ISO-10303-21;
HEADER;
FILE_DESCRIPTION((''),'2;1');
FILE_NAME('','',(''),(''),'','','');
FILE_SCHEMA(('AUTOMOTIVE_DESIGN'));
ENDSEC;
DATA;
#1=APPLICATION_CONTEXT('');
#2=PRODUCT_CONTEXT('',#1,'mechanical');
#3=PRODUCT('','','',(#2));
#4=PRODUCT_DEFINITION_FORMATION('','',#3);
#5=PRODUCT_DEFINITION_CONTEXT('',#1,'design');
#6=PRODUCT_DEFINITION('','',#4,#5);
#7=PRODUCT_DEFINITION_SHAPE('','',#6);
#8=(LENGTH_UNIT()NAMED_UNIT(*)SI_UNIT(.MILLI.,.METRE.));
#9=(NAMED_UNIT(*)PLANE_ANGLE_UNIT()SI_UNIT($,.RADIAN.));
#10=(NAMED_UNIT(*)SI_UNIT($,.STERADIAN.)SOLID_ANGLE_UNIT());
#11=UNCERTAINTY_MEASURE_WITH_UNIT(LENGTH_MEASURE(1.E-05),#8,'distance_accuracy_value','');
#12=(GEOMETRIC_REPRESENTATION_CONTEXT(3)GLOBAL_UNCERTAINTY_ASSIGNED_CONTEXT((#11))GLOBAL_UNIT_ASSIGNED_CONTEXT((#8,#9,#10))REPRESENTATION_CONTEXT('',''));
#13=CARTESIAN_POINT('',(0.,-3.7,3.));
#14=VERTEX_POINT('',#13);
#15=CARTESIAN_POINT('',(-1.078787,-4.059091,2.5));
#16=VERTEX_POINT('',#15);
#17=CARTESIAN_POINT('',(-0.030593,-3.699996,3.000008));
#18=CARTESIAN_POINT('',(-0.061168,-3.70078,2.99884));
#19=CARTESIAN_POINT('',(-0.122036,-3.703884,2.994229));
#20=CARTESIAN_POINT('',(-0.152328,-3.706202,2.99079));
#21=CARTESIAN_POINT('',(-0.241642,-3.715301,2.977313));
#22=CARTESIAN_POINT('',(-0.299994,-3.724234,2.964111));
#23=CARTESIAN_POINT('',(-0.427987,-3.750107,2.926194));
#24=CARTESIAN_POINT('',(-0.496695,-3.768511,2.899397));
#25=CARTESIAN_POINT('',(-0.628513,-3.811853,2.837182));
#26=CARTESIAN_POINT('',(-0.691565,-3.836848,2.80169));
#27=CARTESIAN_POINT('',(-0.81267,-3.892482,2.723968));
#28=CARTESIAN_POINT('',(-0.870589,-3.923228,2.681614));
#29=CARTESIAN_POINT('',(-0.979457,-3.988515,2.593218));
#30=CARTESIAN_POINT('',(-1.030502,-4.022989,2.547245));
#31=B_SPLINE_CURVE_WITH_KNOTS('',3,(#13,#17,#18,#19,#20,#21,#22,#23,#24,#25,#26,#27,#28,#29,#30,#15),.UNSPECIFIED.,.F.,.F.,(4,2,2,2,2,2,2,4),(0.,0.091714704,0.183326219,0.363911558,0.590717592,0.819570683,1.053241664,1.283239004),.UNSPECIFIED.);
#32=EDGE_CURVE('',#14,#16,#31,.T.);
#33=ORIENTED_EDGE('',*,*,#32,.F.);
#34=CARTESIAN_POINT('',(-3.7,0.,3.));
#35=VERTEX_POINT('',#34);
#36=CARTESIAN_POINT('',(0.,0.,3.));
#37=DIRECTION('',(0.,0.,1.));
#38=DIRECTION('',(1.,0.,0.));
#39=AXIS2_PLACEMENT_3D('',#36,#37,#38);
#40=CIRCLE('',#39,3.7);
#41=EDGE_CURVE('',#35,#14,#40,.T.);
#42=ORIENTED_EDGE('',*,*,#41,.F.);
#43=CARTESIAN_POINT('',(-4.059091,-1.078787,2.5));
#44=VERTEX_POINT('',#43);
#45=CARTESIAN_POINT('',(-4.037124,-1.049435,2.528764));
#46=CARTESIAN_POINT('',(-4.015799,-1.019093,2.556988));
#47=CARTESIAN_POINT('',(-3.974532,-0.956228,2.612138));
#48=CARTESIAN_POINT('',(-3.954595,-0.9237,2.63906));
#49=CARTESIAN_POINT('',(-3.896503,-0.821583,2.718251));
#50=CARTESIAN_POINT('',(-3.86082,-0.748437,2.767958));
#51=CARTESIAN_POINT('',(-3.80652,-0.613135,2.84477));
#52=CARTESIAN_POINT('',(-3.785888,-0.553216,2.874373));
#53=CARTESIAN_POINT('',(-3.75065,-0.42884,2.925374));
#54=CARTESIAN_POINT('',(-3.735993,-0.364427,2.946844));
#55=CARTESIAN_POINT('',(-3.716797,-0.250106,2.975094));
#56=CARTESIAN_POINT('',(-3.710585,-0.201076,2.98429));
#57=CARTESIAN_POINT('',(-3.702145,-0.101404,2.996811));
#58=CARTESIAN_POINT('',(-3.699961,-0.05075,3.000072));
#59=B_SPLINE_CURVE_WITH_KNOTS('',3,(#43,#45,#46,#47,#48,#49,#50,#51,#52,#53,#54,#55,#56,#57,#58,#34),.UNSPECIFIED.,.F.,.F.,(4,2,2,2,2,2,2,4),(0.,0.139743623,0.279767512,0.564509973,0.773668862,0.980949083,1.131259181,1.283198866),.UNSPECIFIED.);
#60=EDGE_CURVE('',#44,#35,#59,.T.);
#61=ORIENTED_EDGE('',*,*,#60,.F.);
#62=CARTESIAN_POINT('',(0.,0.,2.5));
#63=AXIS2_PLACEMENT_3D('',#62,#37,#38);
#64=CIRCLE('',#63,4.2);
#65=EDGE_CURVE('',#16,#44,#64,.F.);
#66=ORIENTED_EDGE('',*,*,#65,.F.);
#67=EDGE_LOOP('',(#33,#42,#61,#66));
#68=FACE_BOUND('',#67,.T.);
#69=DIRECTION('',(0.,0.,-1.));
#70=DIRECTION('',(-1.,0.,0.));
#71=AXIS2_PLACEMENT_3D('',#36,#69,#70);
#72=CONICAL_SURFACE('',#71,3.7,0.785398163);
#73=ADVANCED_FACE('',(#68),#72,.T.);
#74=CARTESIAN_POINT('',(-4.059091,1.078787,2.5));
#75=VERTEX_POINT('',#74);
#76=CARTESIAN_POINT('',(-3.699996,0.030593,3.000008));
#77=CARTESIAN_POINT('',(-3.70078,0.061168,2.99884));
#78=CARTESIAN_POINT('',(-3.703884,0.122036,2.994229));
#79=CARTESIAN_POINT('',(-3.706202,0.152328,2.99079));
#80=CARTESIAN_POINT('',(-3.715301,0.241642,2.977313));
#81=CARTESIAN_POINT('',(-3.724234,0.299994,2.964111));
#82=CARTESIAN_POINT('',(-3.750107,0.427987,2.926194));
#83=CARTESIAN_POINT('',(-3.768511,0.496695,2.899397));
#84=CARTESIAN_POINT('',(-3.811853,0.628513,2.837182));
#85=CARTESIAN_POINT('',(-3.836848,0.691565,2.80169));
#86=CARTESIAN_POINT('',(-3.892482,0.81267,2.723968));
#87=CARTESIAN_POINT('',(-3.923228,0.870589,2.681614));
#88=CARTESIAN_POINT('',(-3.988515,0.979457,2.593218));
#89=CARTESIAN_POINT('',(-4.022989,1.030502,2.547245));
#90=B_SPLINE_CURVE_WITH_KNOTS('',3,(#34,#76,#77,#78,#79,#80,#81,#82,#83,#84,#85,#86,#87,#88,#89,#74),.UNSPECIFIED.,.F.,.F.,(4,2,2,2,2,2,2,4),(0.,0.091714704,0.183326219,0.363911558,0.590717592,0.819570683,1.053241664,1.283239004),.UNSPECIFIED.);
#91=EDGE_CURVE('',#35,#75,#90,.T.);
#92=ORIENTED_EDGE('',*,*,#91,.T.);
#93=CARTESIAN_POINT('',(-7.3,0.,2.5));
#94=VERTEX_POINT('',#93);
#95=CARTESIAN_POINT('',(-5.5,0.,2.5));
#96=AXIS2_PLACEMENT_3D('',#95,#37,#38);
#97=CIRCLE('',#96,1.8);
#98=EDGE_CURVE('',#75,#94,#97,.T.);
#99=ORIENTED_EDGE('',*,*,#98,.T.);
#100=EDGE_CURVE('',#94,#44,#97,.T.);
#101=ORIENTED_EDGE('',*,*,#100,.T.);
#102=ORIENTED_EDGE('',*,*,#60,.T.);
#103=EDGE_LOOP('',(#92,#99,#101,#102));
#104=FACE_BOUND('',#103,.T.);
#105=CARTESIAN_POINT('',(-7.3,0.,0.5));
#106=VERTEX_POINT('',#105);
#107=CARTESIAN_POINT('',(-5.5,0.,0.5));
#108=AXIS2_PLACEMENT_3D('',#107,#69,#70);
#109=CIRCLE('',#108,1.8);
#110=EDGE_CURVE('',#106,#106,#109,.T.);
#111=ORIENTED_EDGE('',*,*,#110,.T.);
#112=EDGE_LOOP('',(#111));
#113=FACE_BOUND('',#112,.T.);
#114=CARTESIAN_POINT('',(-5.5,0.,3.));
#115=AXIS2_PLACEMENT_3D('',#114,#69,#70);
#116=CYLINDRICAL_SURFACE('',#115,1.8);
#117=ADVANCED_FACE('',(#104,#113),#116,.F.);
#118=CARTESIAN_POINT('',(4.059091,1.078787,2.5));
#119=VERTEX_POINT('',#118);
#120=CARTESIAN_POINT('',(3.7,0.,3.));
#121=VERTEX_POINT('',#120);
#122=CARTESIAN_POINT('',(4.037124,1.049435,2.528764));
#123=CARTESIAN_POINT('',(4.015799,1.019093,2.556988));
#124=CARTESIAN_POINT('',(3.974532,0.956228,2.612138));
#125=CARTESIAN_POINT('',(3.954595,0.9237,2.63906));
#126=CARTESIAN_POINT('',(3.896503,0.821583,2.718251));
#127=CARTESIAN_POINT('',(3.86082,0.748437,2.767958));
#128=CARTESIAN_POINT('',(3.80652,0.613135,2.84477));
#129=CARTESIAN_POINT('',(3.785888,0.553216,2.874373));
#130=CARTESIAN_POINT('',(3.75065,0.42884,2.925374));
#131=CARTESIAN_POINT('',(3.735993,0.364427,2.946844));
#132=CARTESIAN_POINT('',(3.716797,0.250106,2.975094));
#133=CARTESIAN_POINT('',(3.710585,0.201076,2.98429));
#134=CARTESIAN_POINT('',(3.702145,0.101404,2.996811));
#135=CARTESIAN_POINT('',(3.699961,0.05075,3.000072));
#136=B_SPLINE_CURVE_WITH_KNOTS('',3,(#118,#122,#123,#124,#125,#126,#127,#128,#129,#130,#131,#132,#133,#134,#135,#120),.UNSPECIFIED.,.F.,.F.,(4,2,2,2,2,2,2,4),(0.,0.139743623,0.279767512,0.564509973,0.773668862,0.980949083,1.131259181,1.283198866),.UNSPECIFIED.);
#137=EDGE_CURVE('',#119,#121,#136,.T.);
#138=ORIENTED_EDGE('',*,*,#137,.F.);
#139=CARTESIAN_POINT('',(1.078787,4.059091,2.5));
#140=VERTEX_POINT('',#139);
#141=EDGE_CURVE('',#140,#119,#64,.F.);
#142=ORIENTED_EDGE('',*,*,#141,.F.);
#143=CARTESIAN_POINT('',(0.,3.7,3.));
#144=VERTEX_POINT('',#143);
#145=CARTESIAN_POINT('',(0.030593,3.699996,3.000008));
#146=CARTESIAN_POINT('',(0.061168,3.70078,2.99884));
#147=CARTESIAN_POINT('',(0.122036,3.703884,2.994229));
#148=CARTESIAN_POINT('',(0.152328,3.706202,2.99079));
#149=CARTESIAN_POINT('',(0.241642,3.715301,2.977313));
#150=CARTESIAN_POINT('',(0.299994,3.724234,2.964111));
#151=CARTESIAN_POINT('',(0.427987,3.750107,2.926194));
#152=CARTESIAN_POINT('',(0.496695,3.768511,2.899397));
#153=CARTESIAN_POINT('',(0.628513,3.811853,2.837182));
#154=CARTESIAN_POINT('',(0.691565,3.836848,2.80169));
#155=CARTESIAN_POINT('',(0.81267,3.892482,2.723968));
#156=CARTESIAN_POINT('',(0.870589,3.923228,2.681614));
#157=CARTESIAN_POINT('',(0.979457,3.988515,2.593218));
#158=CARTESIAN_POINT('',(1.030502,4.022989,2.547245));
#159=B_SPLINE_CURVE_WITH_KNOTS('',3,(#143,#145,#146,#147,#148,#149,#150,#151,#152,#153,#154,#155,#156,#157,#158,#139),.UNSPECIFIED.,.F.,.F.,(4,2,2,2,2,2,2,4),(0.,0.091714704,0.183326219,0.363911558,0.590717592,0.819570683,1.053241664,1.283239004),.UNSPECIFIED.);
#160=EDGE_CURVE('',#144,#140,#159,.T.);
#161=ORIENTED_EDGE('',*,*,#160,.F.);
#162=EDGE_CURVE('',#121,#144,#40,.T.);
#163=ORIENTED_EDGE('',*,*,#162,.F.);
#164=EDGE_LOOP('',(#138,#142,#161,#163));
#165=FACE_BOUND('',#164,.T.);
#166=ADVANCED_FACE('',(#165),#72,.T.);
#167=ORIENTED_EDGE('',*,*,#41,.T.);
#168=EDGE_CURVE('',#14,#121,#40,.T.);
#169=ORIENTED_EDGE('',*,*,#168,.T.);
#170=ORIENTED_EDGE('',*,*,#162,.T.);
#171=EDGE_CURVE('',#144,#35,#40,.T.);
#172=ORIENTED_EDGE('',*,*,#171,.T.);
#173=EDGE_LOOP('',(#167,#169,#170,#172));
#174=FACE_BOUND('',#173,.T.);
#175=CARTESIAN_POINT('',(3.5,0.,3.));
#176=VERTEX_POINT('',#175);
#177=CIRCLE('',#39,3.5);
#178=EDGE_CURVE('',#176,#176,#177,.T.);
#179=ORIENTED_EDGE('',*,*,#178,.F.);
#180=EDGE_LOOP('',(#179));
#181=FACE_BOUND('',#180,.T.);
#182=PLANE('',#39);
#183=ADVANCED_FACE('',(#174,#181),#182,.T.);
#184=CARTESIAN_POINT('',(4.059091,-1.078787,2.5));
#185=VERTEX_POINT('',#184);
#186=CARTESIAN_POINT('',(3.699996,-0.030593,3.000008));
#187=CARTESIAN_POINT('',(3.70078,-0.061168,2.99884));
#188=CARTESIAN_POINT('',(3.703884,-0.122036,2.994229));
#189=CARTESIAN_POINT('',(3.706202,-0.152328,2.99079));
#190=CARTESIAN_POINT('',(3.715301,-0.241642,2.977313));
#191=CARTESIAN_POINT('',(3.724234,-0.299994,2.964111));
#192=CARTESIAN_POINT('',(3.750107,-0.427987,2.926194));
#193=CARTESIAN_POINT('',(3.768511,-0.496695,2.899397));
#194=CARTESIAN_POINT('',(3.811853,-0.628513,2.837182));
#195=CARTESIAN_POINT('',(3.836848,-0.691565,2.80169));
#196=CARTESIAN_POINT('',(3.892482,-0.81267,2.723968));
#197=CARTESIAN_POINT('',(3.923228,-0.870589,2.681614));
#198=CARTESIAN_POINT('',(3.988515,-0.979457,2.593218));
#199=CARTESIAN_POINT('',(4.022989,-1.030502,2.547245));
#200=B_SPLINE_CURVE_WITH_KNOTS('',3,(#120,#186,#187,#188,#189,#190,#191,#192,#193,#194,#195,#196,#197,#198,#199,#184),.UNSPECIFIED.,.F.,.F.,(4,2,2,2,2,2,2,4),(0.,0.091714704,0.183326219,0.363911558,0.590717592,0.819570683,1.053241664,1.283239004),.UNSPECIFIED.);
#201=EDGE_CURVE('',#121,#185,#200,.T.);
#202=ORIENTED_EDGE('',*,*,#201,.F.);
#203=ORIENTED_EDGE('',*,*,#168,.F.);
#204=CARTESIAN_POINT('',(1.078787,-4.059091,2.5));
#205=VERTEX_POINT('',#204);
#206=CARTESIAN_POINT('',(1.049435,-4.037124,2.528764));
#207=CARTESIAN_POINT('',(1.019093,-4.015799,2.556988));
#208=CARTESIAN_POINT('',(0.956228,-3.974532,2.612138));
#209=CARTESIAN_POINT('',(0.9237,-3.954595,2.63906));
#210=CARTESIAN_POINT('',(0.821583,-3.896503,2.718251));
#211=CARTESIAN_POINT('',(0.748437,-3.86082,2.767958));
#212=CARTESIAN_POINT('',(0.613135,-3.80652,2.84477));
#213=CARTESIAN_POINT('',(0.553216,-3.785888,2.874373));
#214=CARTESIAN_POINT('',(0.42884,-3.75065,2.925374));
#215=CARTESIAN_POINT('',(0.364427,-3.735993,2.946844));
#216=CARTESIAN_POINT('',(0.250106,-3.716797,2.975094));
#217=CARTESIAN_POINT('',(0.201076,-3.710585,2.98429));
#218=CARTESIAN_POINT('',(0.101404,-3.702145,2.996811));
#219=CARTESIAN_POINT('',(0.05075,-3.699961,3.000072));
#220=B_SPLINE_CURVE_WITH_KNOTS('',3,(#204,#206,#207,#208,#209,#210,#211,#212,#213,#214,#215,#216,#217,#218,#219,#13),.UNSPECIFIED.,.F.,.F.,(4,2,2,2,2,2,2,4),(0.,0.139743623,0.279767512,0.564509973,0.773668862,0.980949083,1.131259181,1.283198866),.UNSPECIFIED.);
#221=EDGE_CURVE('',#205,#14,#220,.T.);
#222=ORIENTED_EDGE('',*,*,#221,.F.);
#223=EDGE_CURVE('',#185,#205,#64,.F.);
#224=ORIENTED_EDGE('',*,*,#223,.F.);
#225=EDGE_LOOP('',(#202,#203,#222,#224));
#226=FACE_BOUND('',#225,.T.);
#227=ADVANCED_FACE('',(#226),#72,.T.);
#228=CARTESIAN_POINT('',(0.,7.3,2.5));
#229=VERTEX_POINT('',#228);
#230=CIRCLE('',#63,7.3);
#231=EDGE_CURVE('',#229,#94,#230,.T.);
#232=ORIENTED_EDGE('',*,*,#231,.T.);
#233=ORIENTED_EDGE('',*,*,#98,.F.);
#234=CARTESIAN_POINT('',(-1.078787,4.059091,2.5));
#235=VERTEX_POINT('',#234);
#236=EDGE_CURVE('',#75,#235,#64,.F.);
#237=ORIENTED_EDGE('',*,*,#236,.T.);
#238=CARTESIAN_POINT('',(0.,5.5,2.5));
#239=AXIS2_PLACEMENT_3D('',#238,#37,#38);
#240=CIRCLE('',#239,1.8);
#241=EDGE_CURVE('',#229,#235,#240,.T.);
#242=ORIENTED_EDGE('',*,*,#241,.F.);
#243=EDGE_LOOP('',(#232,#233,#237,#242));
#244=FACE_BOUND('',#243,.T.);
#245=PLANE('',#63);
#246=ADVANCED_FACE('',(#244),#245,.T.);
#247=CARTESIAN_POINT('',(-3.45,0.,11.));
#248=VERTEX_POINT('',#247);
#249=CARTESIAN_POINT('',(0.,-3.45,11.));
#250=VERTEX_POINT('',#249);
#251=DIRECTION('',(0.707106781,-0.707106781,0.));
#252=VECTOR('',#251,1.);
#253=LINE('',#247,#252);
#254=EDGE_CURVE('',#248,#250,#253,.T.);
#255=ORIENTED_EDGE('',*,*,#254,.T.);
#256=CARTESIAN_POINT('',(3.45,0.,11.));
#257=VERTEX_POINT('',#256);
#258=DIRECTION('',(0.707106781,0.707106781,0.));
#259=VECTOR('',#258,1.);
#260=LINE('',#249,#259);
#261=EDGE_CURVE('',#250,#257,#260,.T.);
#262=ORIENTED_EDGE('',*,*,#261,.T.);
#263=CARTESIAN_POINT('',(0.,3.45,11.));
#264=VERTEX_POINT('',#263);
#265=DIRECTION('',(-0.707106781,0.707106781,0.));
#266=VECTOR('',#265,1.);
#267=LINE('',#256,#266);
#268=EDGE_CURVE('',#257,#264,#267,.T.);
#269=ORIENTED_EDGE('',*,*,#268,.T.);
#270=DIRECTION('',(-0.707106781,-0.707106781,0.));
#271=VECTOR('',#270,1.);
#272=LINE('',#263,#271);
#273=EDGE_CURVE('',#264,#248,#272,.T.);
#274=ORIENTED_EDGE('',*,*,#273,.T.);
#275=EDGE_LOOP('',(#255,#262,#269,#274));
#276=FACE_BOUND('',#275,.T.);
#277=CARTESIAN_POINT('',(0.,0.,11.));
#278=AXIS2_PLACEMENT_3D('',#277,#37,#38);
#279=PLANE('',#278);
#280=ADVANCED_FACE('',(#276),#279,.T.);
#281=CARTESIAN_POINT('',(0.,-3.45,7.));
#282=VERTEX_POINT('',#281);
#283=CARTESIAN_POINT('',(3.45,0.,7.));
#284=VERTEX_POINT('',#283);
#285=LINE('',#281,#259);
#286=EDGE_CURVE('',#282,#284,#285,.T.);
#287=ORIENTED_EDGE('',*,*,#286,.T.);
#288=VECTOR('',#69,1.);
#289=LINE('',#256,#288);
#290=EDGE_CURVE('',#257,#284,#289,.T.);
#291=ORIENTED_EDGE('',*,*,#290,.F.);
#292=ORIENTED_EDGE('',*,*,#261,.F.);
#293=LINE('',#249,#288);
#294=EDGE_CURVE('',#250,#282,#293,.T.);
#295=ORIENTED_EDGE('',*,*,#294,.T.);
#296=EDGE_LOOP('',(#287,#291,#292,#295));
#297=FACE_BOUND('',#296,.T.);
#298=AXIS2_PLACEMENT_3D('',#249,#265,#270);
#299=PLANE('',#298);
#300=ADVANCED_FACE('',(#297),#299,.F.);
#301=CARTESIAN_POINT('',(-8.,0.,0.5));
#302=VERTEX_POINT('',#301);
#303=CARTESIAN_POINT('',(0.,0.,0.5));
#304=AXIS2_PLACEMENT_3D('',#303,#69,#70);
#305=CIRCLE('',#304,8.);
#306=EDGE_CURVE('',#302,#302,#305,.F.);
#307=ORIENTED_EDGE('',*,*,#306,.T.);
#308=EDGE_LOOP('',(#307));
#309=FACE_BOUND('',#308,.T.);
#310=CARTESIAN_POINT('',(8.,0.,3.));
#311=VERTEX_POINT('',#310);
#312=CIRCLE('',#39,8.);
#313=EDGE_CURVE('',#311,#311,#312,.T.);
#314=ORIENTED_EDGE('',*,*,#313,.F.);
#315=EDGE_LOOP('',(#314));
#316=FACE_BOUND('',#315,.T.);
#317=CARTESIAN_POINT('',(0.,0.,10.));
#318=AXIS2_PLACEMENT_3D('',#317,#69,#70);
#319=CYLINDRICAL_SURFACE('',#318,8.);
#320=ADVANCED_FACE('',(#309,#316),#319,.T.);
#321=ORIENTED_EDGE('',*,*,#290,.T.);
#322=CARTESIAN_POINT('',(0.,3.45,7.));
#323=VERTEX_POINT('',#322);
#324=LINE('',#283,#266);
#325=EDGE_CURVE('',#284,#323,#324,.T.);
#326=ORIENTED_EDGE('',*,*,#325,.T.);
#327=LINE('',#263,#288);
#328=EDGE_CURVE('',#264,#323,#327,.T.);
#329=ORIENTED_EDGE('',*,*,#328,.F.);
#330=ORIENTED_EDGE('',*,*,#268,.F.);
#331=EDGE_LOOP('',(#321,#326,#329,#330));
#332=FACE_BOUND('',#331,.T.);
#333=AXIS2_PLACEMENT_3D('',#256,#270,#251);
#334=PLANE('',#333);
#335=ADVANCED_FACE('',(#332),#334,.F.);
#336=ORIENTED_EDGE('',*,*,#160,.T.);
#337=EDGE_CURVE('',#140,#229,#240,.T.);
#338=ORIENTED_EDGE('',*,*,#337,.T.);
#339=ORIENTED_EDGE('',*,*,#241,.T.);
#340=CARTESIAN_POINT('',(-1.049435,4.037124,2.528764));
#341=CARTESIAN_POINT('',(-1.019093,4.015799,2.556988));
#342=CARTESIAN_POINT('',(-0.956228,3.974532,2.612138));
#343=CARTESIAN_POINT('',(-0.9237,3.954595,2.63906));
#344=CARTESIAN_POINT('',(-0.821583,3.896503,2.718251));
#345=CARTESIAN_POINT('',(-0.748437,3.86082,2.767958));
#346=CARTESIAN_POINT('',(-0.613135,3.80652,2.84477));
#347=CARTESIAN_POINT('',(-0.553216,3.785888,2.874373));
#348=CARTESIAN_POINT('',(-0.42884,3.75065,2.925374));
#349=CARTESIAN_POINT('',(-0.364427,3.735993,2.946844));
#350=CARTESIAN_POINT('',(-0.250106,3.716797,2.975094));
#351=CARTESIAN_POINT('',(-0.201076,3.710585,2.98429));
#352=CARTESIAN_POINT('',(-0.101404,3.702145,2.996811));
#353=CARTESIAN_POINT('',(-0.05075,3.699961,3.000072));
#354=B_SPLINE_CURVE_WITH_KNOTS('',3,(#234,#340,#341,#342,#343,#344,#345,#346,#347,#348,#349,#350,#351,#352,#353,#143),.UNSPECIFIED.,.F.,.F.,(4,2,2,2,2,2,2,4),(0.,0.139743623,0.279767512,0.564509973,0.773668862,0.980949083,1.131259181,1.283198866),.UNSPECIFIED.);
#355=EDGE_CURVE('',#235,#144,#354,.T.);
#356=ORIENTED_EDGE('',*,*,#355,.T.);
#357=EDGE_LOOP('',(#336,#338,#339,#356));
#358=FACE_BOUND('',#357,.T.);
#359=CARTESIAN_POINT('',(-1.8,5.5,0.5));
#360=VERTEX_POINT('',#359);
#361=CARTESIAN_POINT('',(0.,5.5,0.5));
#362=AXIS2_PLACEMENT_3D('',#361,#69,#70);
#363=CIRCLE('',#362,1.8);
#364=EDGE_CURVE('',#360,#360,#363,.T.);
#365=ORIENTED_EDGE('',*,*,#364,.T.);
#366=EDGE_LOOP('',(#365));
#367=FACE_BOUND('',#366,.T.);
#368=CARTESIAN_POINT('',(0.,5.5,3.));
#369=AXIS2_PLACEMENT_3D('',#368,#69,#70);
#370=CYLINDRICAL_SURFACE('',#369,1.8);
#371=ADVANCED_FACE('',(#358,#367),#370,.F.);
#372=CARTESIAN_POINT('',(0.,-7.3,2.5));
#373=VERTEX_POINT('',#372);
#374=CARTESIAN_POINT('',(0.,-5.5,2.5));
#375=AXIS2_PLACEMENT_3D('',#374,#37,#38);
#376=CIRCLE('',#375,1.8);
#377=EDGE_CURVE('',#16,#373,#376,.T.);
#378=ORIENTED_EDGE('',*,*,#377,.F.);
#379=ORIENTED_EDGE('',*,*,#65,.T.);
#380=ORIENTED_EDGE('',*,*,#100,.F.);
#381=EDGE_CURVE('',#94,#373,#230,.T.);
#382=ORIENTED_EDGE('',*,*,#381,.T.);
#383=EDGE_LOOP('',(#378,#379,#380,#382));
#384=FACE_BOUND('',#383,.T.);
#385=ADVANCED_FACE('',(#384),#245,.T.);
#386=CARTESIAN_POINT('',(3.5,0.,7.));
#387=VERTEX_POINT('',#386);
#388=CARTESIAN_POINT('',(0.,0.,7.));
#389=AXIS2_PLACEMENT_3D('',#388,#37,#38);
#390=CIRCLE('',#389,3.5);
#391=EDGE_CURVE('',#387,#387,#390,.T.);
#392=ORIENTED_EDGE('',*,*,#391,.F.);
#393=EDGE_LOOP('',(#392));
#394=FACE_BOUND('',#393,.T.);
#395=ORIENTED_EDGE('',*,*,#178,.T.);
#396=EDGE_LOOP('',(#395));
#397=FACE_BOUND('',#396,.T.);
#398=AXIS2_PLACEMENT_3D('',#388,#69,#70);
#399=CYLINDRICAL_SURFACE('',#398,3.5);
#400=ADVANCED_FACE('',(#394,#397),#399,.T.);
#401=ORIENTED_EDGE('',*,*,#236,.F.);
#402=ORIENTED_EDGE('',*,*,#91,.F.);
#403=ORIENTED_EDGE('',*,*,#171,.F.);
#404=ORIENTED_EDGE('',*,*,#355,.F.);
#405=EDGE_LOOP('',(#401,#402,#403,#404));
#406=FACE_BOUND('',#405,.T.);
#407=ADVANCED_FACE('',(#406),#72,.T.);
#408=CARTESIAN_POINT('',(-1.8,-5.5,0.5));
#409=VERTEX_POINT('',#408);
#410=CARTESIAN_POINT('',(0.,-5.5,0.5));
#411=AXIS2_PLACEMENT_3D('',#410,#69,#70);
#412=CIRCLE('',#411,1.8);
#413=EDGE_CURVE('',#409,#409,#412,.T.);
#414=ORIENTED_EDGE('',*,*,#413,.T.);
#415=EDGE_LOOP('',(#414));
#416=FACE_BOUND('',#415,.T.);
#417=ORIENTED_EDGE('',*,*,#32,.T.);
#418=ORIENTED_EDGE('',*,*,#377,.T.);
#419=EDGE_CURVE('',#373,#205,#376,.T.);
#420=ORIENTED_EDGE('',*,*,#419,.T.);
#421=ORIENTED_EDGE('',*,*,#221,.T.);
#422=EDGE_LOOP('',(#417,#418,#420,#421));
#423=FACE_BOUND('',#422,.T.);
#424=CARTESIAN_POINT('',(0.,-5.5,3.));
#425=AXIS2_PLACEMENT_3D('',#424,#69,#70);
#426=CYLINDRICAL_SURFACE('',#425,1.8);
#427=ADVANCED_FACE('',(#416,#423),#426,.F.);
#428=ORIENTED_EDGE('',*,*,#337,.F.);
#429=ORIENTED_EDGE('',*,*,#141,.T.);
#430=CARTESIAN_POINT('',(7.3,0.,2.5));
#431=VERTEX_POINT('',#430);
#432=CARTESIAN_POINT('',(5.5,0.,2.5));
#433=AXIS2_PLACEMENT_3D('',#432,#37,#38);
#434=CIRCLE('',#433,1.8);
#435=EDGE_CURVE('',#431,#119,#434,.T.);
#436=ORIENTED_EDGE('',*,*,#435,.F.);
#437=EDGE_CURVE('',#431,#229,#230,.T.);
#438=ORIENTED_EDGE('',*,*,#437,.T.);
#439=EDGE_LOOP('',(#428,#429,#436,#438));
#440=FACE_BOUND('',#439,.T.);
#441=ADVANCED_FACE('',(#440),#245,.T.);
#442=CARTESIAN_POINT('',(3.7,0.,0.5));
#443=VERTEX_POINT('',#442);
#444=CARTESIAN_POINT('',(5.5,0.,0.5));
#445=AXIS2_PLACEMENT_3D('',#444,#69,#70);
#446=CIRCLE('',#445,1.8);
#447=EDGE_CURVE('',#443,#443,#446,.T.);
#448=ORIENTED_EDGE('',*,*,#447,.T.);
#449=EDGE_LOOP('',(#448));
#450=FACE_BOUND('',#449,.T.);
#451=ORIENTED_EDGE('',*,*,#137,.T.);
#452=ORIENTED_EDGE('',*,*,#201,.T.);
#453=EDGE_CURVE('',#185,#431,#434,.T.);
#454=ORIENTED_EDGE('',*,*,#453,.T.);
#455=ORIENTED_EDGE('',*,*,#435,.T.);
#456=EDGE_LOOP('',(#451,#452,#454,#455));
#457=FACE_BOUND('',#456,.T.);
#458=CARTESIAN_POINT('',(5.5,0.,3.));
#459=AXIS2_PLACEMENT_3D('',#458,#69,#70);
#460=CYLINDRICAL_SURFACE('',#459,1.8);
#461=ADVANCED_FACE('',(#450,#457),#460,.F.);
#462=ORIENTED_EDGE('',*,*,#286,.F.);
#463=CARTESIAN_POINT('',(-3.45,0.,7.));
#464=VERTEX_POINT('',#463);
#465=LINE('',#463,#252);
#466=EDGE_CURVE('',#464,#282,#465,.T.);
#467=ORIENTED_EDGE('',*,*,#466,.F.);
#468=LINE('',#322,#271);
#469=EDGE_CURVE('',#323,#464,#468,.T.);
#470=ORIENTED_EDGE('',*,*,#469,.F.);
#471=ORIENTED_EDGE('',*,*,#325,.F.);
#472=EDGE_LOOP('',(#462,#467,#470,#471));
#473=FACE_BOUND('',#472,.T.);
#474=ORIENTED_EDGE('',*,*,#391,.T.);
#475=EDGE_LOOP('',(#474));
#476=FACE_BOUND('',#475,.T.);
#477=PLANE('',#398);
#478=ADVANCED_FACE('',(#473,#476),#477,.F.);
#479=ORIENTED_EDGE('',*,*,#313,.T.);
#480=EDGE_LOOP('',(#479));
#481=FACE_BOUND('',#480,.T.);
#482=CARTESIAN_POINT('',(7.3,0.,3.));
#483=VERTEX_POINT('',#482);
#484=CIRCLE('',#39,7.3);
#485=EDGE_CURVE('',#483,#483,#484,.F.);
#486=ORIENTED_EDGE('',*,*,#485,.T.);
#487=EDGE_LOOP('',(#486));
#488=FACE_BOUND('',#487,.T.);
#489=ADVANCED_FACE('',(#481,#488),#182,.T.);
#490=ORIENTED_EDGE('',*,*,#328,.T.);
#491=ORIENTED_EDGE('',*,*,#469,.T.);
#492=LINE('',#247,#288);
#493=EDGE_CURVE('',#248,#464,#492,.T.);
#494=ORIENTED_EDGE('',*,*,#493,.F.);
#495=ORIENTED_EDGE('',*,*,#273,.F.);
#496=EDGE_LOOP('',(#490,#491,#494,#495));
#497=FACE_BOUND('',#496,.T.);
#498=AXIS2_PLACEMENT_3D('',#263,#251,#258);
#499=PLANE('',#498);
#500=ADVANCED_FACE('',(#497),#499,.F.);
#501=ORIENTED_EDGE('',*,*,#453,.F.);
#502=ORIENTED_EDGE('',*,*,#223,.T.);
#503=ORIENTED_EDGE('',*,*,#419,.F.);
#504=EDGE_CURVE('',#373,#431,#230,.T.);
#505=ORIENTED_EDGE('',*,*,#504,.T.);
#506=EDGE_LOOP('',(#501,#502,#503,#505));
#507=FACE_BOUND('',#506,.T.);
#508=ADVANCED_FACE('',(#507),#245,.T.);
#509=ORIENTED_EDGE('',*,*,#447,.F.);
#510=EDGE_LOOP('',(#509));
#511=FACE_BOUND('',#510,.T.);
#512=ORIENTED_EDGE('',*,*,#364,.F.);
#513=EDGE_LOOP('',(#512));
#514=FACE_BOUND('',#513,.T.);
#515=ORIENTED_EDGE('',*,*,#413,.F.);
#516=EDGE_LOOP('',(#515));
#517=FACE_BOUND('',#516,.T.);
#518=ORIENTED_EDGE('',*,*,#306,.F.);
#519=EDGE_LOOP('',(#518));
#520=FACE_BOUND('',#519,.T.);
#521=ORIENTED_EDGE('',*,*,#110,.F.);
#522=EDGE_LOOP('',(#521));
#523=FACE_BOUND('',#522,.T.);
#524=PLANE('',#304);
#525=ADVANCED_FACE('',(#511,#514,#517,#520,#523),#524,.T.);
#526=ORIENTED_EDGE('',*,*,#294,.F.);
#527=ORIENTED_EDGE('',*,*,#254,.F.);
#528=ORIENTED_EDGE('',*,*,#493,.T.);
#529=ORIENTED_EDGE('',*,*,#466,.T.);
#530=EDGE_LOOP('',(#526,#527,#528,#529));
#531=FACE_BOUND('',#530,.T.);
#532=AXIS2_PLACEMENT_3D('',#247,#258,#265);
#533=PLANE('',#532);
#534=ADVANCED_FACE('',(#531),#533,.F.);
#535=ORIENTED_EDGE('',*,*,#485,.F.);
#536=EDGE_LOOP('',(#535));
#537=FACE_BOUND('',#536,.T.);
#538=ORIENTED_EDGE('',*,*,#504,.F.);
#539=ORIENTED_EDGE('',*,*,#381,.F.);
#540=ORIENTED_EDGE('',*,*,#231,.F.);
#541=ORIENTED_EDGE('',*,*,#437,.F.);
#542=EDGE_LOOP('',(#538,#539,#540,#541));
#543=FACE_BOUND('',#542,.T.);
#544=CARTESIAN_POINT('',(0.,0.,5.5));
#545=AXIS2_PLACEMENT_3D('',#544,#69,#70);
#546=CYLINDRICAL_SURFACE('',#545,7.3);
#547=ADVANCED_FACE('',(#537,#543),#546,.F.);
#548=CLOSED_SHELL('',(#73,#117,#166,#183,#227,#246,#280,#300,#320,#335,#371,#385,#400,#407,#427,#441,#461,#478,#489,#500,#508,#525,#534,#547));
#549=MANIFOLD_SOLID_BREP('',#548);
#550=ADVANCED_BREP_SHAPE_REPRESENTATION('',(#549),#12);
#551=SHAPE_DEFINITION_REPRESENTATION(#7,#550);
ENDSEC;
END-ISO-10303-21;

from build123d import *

# Parameters (mm, degrees)
SKETCH_1_R           = 9
SKETCH_1_R_2         = 1.8
EXTRUDE_1_DEPTH      = 3
SKETCH_2_R           = 2.5
EXTRUDE_2_DEPTH      = 5
SKETCH_3_R           = 3
EXTRUDE_3_DEPTH      = 1
EXTRUDE_4_DEPTH      = 1
EXTRUDE_4_DEPTH_BACK = 1
SKETCH_4_R           = 0.75
SKETCH_5_R           = 11.774758228
CUT_EXTRUDE_1_DEPTH  = 10
EXTRUDE_5_DEPTH      = 2
CUT_EXTRUDE_2_DEPTH  = 2
SKETCH_8_R           = 14.855083979
SKETCH_8_R_2         = 8
CUT_EXTRUDE_3_DEPTH  = 10
CUT_EXTRUDE_START    = -0.5
SKETCH_9_R           = 4.256493188
SKETCH_9_R_2         = 2.5
CUT_EXTRUDE_4_DEPTH  = 0.5
SKETCH_10_R          = 3.45
EXTRUDE_6_DEPTH      = 3.5
SKETCH_11_R          = 3.7
EXTRUDE_7_DEPTH      = 3.5
CHAMFER_1_SIZE       = 0.5
EXTRUDE_8_DEPTH      = 4
SKETCH_13_R          = 4.2
SKETCH_13_R_2        = 3.45
CUT_EXTRUDE_5_DEPTH  = 3
SKETCH_14_R          = 6
SKETCH_14_R_2        = 3.7
CUT_EXTRUDE_6_DEPTH  = 0.5
CHAMFER_2_SIZE       = 0.5
CHAMFER_3_SIZE       = 0.5
SKETCH_15_R          = 3.5
EXTRUDE_9_DEPTH      = 4
SKETCH_16_R          = 7.3
SKETCH_16_R_2        = 4.506279258
CUT_EXTRUDE_7_DEPTH  = 3
SKETCH_19_R          = 10.067308749
CUT_EXTRUDE_9_DEPTH  = 0.5


with BuildPart() as part:
    # 草图1 → 凸台-拉伸1 (new body)
    with BuildSketch(Plane.XY):
        Circle(SKETCH_1_R)
        with Locations((0, 5.5)):
            Circle(SKETCH_1_R_2, mode=Mode.SUBTRACT)
        with Locations((5.5, 0)):
            Circle(SKETCH_1_R_2, mode=Mode.SUBTRACT)
        with Locations((0, -5.5)):
            Circle(SKETCH_1_R_2, mode=Mode.SUBTRACT)
        with Locations((-5.5, 0)):
            Circle(SKETCH_1_R_2, mode=Mode.SUBTRACT)
    extrude(amount=EXTRUDE_1_DEPTH)

    # 草图2 → 凸台-拉伸2 (add)
    with BuildSketch(Plane.XY.offset(3)):
        Circle(SKETCH_2_R)
    extrude(amount=EXTRUDE_2_DEPTH)

    # 草图3 → 凸台-拉伸3 (add)
    with BuildSketch(Plane.XY.offset(3)):
        Circle(SKETCH_3_R)
    extrude(amount=EXTRUDE_3_DEPTH)

    # 草图4 → 凸台-拉伸4 (add, two sides: drawn at the far end of the back side and taken through both)
    # profile 1 of 2: a face of its own
    with BuildSketch(Plane.XY.offset(8).offset(-EXTRUDE_4_DEPTH_BACK)):
        with BuildLine():
            Line((2.485541606, 0.268482638), (1.988740974, 4.867732145))
            ThreePointArc((1.988740974, 4.867732145), (-0.00103483, 6.652941663), (-1.988404355, 4.865053763))
            Line((-1.988404355, 4.865053763), (-1.989024096, 4.859160292))
            Line((-1.989024096, 4.859160292), (-2.445314485, 0.520035641))
            ThreePointArc((-2.445314485, 0.520035641), (0.12737458, 2.496753035), (2.485541606, 0.268482638))
        make_face()
        with Locations((0.000312053, 4.652946506)):
            Circle(SKETCH_4_R, mode=Mode.SUBTRACT)
    # profile 2 of 2: a face of its own
    with BuildSketch(Plane.XY.offset(8).offset(-EXTRUDE_4_DEPTH_BACK)):
        with BuildLine():
            ThreePointArc((2.5, 0), (2.496382785, 0.134435832), (2.485541606, 0.268482638))
            ThreePointArc((2.485541606, 0.268482638), (0.12737458, 2.496753035), (-2.445314485, 0.520035641))
            Line((-2.445314485, 0.520035641), (-2.5, 0))
            ThreePointArc((-2.5, 0), (0, -2.5), (2.5, 0))
        make_face()
    extrude(amount=EXTRUDE_4_DEPTH + EXTRUDE_4_DEPTH_BACK)

    # 草图5 → 切除-拉伸1 (cut)
    with BuildSketch(Plane(origin=(0, 0, 7), x_dir=(-1, 0, 0), z_dir=(0, 0, -1))):
        Circle(SKETCH_5_R)
        Polygon((0, 2.481609408), (2.5, 0), (0, -2.5), (-2.5, 0), align=None, mode=Mode.SUBTRACT)
    extrude(amount=-CUT_EXTRUDE_1_DEPTH, mode=Mode.SUBTRACT)

    # 草图6 → 凸台-拉伸5 (add)
    with BuildSketch(Plane.XY.offset(9)):
        Polygon((0, 2.5), (-2.5, 0), (0, -2.5), (2.5, 0), align=None)
    extrude(amount=EXTRUDE_5_DEPTH)

    # 草图7 → 切除-拉伸2 (cut)
    with BuildSketch(Plane(origin=(0, 0, 9), x_dir=(-1, 0, 0), z_dir=(0, 0, -1))):
        Polygon((0, 2.481609408), (-2.5, 0), (-8.257651415, 6.64470805), (8.324868768, 1.809009791), (0.901487765, -7.246606168), (2.5, 0), align=None)
    extrude(amount=-CUT_EXTRUDE_2_DEPTH, mode=Mode.SUBTRACT)

    # 草图8 → 切除-拉伸3 (cut)
    with BuildSketch(Plane(origin=(0, 0, 0), x_dir=(-1, 0, 0), z_dir=(0, 0, -1))):
        with Locations((-0.238627472, 0)):
            Circle(SKETCH_8_R)
        Circle(SKETCH_8_R_2, mode=Mode.SUBTRACT)
    extrude(amount=-CUT_EXTRUDE_3_DEPTH, mode=Mode.SUBTRACT)

    # 草图9 → 切除-拉伸4 (cut)
    with BuildSketch(Plane.XY.offset(4).offset(CUT_EXTRUDE_START)):
        with Locations((0, 0.120232911)):
            Circle(SKETCH_9_R)
        Circle(SKETCH_9_R_2, mode=Mode.SUBTRACT)
    extrude(amount=CUT_EXTRUDE_4_DEPTH, mode=Mode.SUBTRACT)

    # 草图10 → 凸台-拉伸6 (add)
    with BuildSketch(Plane.XY.offset(3.5)):
        Circle(SKETCH_10_R)
    extrude(amount=EXTRUDE_6_DEPTH)

    # 草图11 → 凸台-拉伸7 (add)
    with BuildSketch(Plane(origin=(0, 0, 3.5), x_dir=(-1, 0, 0), z_dir=(0, 0, -1))):
        with Locations(Location((0, 0, 0), (0, 0, 180.000240938))):
            Circle(SKETCH_11_R)
    extrude(amount=EXTRUDE_7_DEPTH)

    # 倒角1
    # the kernel refuses this chamfer: 0.5 mm, written as the material it adds along each edge
    with BuildSketch(Plane(origin=(0, 0, 3), x_dir=(2.429298144255796e-07, -0.9999999999999705, 0), z_dir=(-0.9999999999999705, -2.429298144255796e-07, 0))) as chamfer_1_piece_1_section:
        Polygon((3.7 + CHAMFER_1_SIZE, 0), (3.7, CHAMFER_1_SIZE), (3.7, 0), align=None)
    chamfer_1_piece_1 = revolve(axis=Axis((0, 0, 3), (0, 0, 1)), revolution_arc=89.999745143, mode=Mode.PRIVATE)
    chamfer_1_piece_1 = chamfer_1_piece_1 - Plane(origin=(5.5, 0, 3.243994097), x_dir=(1, 0, 0), z_dir=(0, 0, -1)) * Cylinder(1.8, 17, mode=Mode.PRIVATE)
    chamfer_1_piece_1 = chamfer_1_piece_1 - Plane(origin=(0, -5.5, 3.243994097), x_dir=(1, 0, 0), z_dir=(0, 0, -1)) * Cylinder(1.8, 17, mode=Mode.PRIVATE)
    add(chamfer_1_piece_1)
    with BuildSketch(Plane(origin=(0, 0, 3), x_dir=(0.9999999999911583, -4.205161392743551e-06, 0), z_dir=(-4.205161392743551e-06, -0.9999999999911583, 0))) as chamfer_1_piece_2_section:
        Polygon((3.7 + CHAMFER_1_SIZE, 0), (3.7, CHAMFER_1_SIZE), (3.7, 0), align=None)
    chamfer_1_piece_2 = revolve(axis=Axis((0, 0, 3), (0, 0, 1)), revolution_arc=90.000240938, mode=Mode.PRIVATE)
    chamfer_1_piece_2 = chamfer_1_piece_2 - Plane(origin=(0, 5.5, 3.243994362), x_dir=(1, 0, 0), z_dir=(0, 0, -1)) * Cylinder(1.8, 17, mode=Mode.PRIVATE)
    chamfer_1_piece_2 = chamfer_1_piece_2 - Plane(origin=(5.5, 0, 3.243994362), x_dir=(1, 0, 0), z_dir=(0, 0, -1)) * Cylinder(1.8, 17, mode=Mode.PRIVATE)
    add(chamfer_1_piece_2)
    with BuildSketch(Plane(origin=(0, 0, 3), x_dir=(-1, 0, 0), z_dir=(0, 1, 0))) as chamfer_1_piece_3_section:
        Polygon((3.7 + CHAMFER_1_SIZE, 0), (3.7, CHAMFER_1_SIZE), (3.7, 0), align=None)
    chamfer_1_piece_3 = revolve(axis=Axis((0, 0, 3), (0, 0, 1)), revolution_arc=90.000013919, mode=Mode.PRIVATE)
    chamfer_1_piece_3 = chamfer_1_piece_3 - Plane(origin=(-5.5, 0, 3.24399412), x_dir=(1, 0, 0), z_dir=(0, 0, -1)) * Cylinder(1.8, 17, mode=Mode.PRIVATE)
    chamfer_1_piece_3 = chamfer_1_piece_3 - Plane(origin=(0, -5.5, 3.24399412), x_dir=(1, 0, 0), z_dir=(0, 0, -1)) * Cylinder(1.8, 17, mode=Mode.PRIVATE)
    add(chamfer_1_piece_3)
    with BuildSketch(Plane(origin=(0, 0, 3), x_dir=(0, 1, 0), z_dir=(1, 0, 0))) as chamfer_1_piece_4_section:
        Polygon((3.7 + CHAMFER_1_SIZE, 0), (3.7, CHAMFER_1_SIZE), (3.7, 0), align=None)
    chamfer_1_piece_4 = revolve(axis=Axis((0, 0, 3), (0, 0, 1)), revolution_arc=90, mode=Mode.PRIVATE)
    chamfer_1_piece_4 = chamfer_1_piece_4 - Plane(origin=(0, 5.5, 3.243994109), x_dir=(1, 0, 0), z_dir=(0, 0, -1)) * Cylinder(1.8, 17, mode=Mode.PRIVATE)
    chamfer_1_piece_4 = chamfer_1_piece_4 - Plane(origin=(-5.5, 0, 3.243994109), x_dir=(1, 0, 0), z_dir=(0, 0, -1)) * Cylinder(1.8, 17, mode=Mode.PRIVATE)
    add(chamfer_1_piece_4)

    # 草图12 → 凸台-拉伸8 (add)
    with BuildSketch(Plane.XY.offset(7)):
        Polygon((0, 3.45), (-3.45, 0), (0, -3.45), (3.45, 0), align=None)
    extrude(amount=EXTRUDE_8_DEPTH)

    # 草图13 → 切除-拉伸5 (cut)
    with BuildSketch(Plane.XY.offset(3)):
        Circle(SKETCH_13_R)
        Circle(SKETCH_13_R_2, mode=Mode.SUBTRACT)
    extrude(amount=CUT_EXTRUDE_5_DEPTH, mode=Mode.SUBTRACT)

    # 草图14 → 切除-拉伸6 (cut)
    with BuildSketch(Plane.XY.offset(3)):
        Circle(SKETCH_14_R)
        Circle(SKETCH_14_R_2, mode=Mode.SUBTRACT)
    extrude(amount=-CUT_EXTRUDE_6_DEPTH, mode=Mode.SUBTRACT)

    # 倒角2
    # the kernel refuses this chamfer: 0.5 mm, written as the material it adds along each edge
    with BuildSketch(Plane(origin=(0, 0, 2.5), x_dir=(2.6572576900546526e-07, 0.9999999999999647, 0), z_dir=(0.9999999999999647, -2.6572576900546526e-07, 0))) as chamfer_2_piece_1_section:
        Polygon((3.7, CHAMFER_2_SIZE), (3.7 + CHAMFER_2_SIZE, 0), (3.7, 0), align=None)
    chamfer_2_piece_1 = revolve(axis=Axis((0, 0, 2.5), (0, 0, 1)), revolution_arc=90.000015225, mode=Mode.PRIVATE)
    chamfer_2_piece_1 = chamfer_2_piece_1 - Plane(origin=(-5.5, 0, 2.743994122), x_dir=(1, 0, 0), z_dir=(0, 0, -1)) * Cylinder(1.8, 17, mode=Mode.PRIVATE)
    chamfer_2_piece_1 = chamfer_2_piece_1 - Plane(origin=(0, 5.5, 2.743994122), x_dir=(1, 0, 0), z_dir=(0, 0, -1)) * Cylinder(1.8, 17, mode=Mode.PRIVATE)
    add(chamfer_2_piece_1)
    with BuildSketch(Plane(origin=(0, 0, 2.5), x_dir=(1, 0, 0), z_dir=(0, -1, 0))) as chamfer_2_piece_2_section:
        Polygon((3.7, CHAMFER_2_SIZE), (3.7 + CHAMFER_2_SIZE, 0), (3.7, 0), align=None)
    chamfer_2_piece_2 = revolve(axis=Axis((0, 0, 2.5), (0, 0, 1)), revolution_arc=89.999984775, mode=Mode.PRIVATE)
    chamfer_2_piece_2 = chamfer_2_piece_2 - Plane(origin=(0, 5.5, 2.743994101), x_dir=(1, 0, 0), z_dir=(0, 0, -1)) * Cylinder(1.8, 17, mode=Mode.PRIVATE)
    chamfer_2_piece_2 = chamfer_2_piece_2 - Plane(origin=(5.5, 0, 2.743994101), x_dir=(1, 0, 0), z_dir=(0, 0, -1)) * Cylinder(1.8, 17, mode=Mode.PRIVATE)
    add(chamfer_2_piece_2)
    with BuildSketch(Plane(origin=(0, 0, 2.5), x_dir=(-1, 0, 0), z_dir=(0, 1, 0))) as chamfer_2_piece_3_section:
        Polygon((3.7 + CHAMFER_2_SIZE, 0), (3.7, CHAMFER_2_SIZE), (3.7, 0), align=None)
    chamfer_2_piece_3 = revolve(axis=Axis((0, 0, 2.5), (0, 0, 1)), revolution_arc=90.000015225, mode=Mode.PRIVATE)
    chamfer_2_piece_3 = chamfer_2_piece_3 - Plane(origin=(0, -5.5, 2.743994115), x_dir=(1, 0, 0), z_dir=(0, 0, -1)) * Cylinder(1.8, 17, mode=Mode.PRIVATE)
    chamfer_2_piece_3 = chamfer_2_piece_3 - Plane(origin=(-5.5, 0, 2.743994115), x_dir=(1, 0, 0), z_dir=(0, 0, -1)) * Cylinder(1.8, 17, mode=Mode.PRIVATE)
    add(chamfer_2_piece_3)
    with BuildSketch(Plane(origin=(0, 0, 2.5), x_dir=(2.657257683164467e-07, -0.9999999999999647, 0), z_dir=(-0.9999999999999647, -2.657257683164467e-07, 0))) as chamfer_2_piece_4_section:
        Polygon((3.7, CHAMFER_2_SIZE), (3.7 + CHAMFER_2_SIZE, 0), (3.7, 0), align=None)
    chamfer_2_piece_4 = revolve(axis=Axis((0, 0, 2.5), (0, 0, 1)), revolution_arc=89.999984775, mode=Mode.PRIVATE)
    chamfer_2_piece_4 = chamfer_2_piece_4 - Plane(origin=(0, -5.5, 2.743994101), x_dir=(1, 0, 0), z_dir=(0, 0, -1)) * Cylinder(1.8, 17, mode=Mode.PRIVATE)
    chamfer_2_piece_4 = chamfer_2_piece_4 - Plane(origin=(5.5, 0, 2.743994101), x_dir=(1, 0, 0), z_dir=(0, 0, -1)) * Cylinder(1.8, 17, mode=Mode.PRIVATE)
    add(chamfer_2_piece_4)

    # 倒角3
    # the kernel refuses this chamfer: 0.5 mm, written as the material it adds along each edge
    with BuildSketch(Plane(origin=(0, 0, 2.5), x_dir=(0.08770420194381934, -0.9961465619884445, 0), z_dir=(-0.9961465619884445, -0.08770420194381934, 0))) as chamfer_3_piece_1_section:
        Polygon((6 - CHAMFER_3_SIZE, 0), (6, CHAMFER_3_SIZE), (6, 0), align=None)
    chamfer_3_piece_1 = revolve(axis=Axis((0, 0, 2.5), (0, 0, 1)), revolution_arc=79.936909611, mode=Mode.PRIVATE)
    chamfer_3_piece_1 = chamfer_3_piece_1 - Plane(origin=(0, -5.5, 2.736482642), x_dir=(1, 0, 0), z_dir=(0, 0, -1)) * Cylinder(1.8, 25, mode=Mode.PRIVATE)
    chamfer_3_piece_1 = chamfer_3_piece_1 - Plane(origin=(5.5, 0, 2.736482642), x_dir=(1, 0, 0), z_dir=(0, 0, -1)) * Cylinder(1.8, 25, mode=Mode.PRIVATE)
    chamfer_3_piece_1 = split(chamfer_3_piece_1, bisect_by=Plane(origin=(4.065422208, -4.065422207, 3), z_dir=(0, 0, -1)), keep=Keep.TOP, mode=Mode.PRIVATE)
    add(chamfer_3_piece_1)
    with BuildSketch(Plane(origin=(0, 0, 2.5), x_dir=(-0.9961465619884445, -0.08770420194381941, 0), z_dir=(-0.08770420194381941, 0.9961465619884445, 0))) as chamfer_3_piece_2_section:
        Polygon((6 - CHAMFER_3_SIZE, 0), (6, CHAMFER_3_SIZE), (6, 0), align=None)
    chamfer_3_piece_2 = revolve(axis=Axis((0, 0, 2.5), (0, 0, 1)), revolution_arc=79.936909611, mode=Mode.PRIVATE)
    chamfer_3_piece_2 = chamfer_3_piece_2 - Plane(origin=(0, -5.5, 2.736482642), x_dir=(1, 0, 0), z_dir=(0, 0, -1)) * Cylinder(1.8, 25, mode=Mode.PRIVATE)
    chamfer_3_piece_2 = chamfer_3_piece_2 - Plane(origin=(-5.5, 0, 2.736482642), x_dir=(1, 0, 0), z_dir=(0, 0, -1)) * Cylinder(1.8, 25, mode=Mode.PRIVATE)
    chamfer_3_piece_2 = split(chamfer_3_piece_2, bisect_by=Plane(origin=(-4.065422207, -4.065422207, 3), z_dir=(0, 0, -1)), keep=Keep.TOP, mode=Mode.PRIVATE)
    add(chamfer_3_piece_2)
    with BuildSketch(Plane(origin=(0, 0, 2.5), x_dir=(0.9961465619884445, 0.08770420194381914, 0), z_dir=(0.08770420194381914, -0.9961465619884445, 0))) as chamfer_3_piece_3_section:
        Polygon((6, CHAMFER_3_SIZE), (6 - CHAMFER_3_SIZE, 0), (6, 0), align=None)
    chamfer_3_piece_3 = revolve(axis=Axis((0, 0, 2.5), (0, 0, 1)), revolution_arc=79.936909611, mode=Mode.PRIVATE)
    chamfer_3_piece_3 = chamfer_3_piece_3 - Plane(origin=(5.5, 0, 2.736482642), x_dir=(1, 0, 0), z_dir=(0, 0, -1)) * Cylinder(1.8, 24, mode=Mode.PRIVATE)
    chamfer_3_piece_3 = split(chamfer_3_piece_3, bisect_by=Plane(origin=(4.065422208, 4.065422207, 3), z_dir=(0, 0, -1)), keep=Keep.TOP, mode=Mode.PRIVATE)
    chamfer_3_piece_3 = chamfer_3_piece_3 - Plane(origin=(0, 5.5, 2.736482642), x_dir=(1, 0, 0), z_dir=(0, 0, -1)) * Cylinder(1.8, 24, mode=Mode.PRIVATE)
    add(chamfer_3_piece_3)
    with BuildSketch(Plane(origin=(0, 0, 2.5), x_dir=(-0.08770420194381902, 0.9961465619884445, 0), z_dir=(0.9961465619884445, 0.08770420194381902, 0))) as chamfer_3_piece_4_section:
        Polygon((6 - CHAMFER_3_SIZE, 0), (6, CHAMFER_3_SIZE), (6, 0), align=None)
    chamfer_3_piece_4 = revolve(axis=Axis((0, 0, 2.5), (0, 0, 1)), revolution_arc=79.936909611, mode=Mode.PRIVATE)
    chamfer_3_piece_4 = split(chamfer_3_piece_4, bisect_by=Plane(origin=(-4.065422207, 4.065422207, 3), z_dir=(0, 0, -1)), keep=Keep.TOP, mode=Mode.PRIVATE)
    chamfer_3_piece_4 = chamfer_3_piece_4 - Plane(origin=(0, 5.5, 2.736482642), x_dir=(1, 0, 0), z_dir=(0, 0, -1)) * Cylinder(1.8, 25, mode=Mode.PRIVATE)
    chamfer_3_piece_4 = chamfer_3_piece_4 - Plane(origin=(-5.5, 0, 2.736482642), x_dir=(1, 0, 0), z_dir=(0, 0, -1)) * Cylinder(1.8, 25, mode=Mode.PRIVATE)
    add(chamfer_3_piece_4)

    # 草图15 → 凸台-拉伸9 (add)
    with BuildSketch(Plane.XY.offset(3)):
        Circle(SKETCH_15_R)
    extrude(amount=EXTRUDE_9_DEPTH)

    # 草图16 → 切除-拉伸7 (cut)
    with BuildSketch(Plane.XY.offset(2.5)):
        Circle(SKETCH_16_R)
        with Locations((0.154292063, 0)):
            Circle(SKETCH_16_R_2, mode=Mode.SUBTRACT)
    extrude(amount=CUT_EXTRUDE_7_DEPTH, mode=Mode.SUBTRACT)

    # 草图19 → 切除-拉伸9 (cut)
    with BuildSketch(Plane(origin=(0, 0, 0), x_dir=(-1, 0, 0), z_dir=(0, 0, -1))):
        Circle(SKETCH_19_R)
    extrude(amount=-CUT_EXTRUDE_9_DEPTH, mode=Mode.SUBTRACT)


solid = part.part
